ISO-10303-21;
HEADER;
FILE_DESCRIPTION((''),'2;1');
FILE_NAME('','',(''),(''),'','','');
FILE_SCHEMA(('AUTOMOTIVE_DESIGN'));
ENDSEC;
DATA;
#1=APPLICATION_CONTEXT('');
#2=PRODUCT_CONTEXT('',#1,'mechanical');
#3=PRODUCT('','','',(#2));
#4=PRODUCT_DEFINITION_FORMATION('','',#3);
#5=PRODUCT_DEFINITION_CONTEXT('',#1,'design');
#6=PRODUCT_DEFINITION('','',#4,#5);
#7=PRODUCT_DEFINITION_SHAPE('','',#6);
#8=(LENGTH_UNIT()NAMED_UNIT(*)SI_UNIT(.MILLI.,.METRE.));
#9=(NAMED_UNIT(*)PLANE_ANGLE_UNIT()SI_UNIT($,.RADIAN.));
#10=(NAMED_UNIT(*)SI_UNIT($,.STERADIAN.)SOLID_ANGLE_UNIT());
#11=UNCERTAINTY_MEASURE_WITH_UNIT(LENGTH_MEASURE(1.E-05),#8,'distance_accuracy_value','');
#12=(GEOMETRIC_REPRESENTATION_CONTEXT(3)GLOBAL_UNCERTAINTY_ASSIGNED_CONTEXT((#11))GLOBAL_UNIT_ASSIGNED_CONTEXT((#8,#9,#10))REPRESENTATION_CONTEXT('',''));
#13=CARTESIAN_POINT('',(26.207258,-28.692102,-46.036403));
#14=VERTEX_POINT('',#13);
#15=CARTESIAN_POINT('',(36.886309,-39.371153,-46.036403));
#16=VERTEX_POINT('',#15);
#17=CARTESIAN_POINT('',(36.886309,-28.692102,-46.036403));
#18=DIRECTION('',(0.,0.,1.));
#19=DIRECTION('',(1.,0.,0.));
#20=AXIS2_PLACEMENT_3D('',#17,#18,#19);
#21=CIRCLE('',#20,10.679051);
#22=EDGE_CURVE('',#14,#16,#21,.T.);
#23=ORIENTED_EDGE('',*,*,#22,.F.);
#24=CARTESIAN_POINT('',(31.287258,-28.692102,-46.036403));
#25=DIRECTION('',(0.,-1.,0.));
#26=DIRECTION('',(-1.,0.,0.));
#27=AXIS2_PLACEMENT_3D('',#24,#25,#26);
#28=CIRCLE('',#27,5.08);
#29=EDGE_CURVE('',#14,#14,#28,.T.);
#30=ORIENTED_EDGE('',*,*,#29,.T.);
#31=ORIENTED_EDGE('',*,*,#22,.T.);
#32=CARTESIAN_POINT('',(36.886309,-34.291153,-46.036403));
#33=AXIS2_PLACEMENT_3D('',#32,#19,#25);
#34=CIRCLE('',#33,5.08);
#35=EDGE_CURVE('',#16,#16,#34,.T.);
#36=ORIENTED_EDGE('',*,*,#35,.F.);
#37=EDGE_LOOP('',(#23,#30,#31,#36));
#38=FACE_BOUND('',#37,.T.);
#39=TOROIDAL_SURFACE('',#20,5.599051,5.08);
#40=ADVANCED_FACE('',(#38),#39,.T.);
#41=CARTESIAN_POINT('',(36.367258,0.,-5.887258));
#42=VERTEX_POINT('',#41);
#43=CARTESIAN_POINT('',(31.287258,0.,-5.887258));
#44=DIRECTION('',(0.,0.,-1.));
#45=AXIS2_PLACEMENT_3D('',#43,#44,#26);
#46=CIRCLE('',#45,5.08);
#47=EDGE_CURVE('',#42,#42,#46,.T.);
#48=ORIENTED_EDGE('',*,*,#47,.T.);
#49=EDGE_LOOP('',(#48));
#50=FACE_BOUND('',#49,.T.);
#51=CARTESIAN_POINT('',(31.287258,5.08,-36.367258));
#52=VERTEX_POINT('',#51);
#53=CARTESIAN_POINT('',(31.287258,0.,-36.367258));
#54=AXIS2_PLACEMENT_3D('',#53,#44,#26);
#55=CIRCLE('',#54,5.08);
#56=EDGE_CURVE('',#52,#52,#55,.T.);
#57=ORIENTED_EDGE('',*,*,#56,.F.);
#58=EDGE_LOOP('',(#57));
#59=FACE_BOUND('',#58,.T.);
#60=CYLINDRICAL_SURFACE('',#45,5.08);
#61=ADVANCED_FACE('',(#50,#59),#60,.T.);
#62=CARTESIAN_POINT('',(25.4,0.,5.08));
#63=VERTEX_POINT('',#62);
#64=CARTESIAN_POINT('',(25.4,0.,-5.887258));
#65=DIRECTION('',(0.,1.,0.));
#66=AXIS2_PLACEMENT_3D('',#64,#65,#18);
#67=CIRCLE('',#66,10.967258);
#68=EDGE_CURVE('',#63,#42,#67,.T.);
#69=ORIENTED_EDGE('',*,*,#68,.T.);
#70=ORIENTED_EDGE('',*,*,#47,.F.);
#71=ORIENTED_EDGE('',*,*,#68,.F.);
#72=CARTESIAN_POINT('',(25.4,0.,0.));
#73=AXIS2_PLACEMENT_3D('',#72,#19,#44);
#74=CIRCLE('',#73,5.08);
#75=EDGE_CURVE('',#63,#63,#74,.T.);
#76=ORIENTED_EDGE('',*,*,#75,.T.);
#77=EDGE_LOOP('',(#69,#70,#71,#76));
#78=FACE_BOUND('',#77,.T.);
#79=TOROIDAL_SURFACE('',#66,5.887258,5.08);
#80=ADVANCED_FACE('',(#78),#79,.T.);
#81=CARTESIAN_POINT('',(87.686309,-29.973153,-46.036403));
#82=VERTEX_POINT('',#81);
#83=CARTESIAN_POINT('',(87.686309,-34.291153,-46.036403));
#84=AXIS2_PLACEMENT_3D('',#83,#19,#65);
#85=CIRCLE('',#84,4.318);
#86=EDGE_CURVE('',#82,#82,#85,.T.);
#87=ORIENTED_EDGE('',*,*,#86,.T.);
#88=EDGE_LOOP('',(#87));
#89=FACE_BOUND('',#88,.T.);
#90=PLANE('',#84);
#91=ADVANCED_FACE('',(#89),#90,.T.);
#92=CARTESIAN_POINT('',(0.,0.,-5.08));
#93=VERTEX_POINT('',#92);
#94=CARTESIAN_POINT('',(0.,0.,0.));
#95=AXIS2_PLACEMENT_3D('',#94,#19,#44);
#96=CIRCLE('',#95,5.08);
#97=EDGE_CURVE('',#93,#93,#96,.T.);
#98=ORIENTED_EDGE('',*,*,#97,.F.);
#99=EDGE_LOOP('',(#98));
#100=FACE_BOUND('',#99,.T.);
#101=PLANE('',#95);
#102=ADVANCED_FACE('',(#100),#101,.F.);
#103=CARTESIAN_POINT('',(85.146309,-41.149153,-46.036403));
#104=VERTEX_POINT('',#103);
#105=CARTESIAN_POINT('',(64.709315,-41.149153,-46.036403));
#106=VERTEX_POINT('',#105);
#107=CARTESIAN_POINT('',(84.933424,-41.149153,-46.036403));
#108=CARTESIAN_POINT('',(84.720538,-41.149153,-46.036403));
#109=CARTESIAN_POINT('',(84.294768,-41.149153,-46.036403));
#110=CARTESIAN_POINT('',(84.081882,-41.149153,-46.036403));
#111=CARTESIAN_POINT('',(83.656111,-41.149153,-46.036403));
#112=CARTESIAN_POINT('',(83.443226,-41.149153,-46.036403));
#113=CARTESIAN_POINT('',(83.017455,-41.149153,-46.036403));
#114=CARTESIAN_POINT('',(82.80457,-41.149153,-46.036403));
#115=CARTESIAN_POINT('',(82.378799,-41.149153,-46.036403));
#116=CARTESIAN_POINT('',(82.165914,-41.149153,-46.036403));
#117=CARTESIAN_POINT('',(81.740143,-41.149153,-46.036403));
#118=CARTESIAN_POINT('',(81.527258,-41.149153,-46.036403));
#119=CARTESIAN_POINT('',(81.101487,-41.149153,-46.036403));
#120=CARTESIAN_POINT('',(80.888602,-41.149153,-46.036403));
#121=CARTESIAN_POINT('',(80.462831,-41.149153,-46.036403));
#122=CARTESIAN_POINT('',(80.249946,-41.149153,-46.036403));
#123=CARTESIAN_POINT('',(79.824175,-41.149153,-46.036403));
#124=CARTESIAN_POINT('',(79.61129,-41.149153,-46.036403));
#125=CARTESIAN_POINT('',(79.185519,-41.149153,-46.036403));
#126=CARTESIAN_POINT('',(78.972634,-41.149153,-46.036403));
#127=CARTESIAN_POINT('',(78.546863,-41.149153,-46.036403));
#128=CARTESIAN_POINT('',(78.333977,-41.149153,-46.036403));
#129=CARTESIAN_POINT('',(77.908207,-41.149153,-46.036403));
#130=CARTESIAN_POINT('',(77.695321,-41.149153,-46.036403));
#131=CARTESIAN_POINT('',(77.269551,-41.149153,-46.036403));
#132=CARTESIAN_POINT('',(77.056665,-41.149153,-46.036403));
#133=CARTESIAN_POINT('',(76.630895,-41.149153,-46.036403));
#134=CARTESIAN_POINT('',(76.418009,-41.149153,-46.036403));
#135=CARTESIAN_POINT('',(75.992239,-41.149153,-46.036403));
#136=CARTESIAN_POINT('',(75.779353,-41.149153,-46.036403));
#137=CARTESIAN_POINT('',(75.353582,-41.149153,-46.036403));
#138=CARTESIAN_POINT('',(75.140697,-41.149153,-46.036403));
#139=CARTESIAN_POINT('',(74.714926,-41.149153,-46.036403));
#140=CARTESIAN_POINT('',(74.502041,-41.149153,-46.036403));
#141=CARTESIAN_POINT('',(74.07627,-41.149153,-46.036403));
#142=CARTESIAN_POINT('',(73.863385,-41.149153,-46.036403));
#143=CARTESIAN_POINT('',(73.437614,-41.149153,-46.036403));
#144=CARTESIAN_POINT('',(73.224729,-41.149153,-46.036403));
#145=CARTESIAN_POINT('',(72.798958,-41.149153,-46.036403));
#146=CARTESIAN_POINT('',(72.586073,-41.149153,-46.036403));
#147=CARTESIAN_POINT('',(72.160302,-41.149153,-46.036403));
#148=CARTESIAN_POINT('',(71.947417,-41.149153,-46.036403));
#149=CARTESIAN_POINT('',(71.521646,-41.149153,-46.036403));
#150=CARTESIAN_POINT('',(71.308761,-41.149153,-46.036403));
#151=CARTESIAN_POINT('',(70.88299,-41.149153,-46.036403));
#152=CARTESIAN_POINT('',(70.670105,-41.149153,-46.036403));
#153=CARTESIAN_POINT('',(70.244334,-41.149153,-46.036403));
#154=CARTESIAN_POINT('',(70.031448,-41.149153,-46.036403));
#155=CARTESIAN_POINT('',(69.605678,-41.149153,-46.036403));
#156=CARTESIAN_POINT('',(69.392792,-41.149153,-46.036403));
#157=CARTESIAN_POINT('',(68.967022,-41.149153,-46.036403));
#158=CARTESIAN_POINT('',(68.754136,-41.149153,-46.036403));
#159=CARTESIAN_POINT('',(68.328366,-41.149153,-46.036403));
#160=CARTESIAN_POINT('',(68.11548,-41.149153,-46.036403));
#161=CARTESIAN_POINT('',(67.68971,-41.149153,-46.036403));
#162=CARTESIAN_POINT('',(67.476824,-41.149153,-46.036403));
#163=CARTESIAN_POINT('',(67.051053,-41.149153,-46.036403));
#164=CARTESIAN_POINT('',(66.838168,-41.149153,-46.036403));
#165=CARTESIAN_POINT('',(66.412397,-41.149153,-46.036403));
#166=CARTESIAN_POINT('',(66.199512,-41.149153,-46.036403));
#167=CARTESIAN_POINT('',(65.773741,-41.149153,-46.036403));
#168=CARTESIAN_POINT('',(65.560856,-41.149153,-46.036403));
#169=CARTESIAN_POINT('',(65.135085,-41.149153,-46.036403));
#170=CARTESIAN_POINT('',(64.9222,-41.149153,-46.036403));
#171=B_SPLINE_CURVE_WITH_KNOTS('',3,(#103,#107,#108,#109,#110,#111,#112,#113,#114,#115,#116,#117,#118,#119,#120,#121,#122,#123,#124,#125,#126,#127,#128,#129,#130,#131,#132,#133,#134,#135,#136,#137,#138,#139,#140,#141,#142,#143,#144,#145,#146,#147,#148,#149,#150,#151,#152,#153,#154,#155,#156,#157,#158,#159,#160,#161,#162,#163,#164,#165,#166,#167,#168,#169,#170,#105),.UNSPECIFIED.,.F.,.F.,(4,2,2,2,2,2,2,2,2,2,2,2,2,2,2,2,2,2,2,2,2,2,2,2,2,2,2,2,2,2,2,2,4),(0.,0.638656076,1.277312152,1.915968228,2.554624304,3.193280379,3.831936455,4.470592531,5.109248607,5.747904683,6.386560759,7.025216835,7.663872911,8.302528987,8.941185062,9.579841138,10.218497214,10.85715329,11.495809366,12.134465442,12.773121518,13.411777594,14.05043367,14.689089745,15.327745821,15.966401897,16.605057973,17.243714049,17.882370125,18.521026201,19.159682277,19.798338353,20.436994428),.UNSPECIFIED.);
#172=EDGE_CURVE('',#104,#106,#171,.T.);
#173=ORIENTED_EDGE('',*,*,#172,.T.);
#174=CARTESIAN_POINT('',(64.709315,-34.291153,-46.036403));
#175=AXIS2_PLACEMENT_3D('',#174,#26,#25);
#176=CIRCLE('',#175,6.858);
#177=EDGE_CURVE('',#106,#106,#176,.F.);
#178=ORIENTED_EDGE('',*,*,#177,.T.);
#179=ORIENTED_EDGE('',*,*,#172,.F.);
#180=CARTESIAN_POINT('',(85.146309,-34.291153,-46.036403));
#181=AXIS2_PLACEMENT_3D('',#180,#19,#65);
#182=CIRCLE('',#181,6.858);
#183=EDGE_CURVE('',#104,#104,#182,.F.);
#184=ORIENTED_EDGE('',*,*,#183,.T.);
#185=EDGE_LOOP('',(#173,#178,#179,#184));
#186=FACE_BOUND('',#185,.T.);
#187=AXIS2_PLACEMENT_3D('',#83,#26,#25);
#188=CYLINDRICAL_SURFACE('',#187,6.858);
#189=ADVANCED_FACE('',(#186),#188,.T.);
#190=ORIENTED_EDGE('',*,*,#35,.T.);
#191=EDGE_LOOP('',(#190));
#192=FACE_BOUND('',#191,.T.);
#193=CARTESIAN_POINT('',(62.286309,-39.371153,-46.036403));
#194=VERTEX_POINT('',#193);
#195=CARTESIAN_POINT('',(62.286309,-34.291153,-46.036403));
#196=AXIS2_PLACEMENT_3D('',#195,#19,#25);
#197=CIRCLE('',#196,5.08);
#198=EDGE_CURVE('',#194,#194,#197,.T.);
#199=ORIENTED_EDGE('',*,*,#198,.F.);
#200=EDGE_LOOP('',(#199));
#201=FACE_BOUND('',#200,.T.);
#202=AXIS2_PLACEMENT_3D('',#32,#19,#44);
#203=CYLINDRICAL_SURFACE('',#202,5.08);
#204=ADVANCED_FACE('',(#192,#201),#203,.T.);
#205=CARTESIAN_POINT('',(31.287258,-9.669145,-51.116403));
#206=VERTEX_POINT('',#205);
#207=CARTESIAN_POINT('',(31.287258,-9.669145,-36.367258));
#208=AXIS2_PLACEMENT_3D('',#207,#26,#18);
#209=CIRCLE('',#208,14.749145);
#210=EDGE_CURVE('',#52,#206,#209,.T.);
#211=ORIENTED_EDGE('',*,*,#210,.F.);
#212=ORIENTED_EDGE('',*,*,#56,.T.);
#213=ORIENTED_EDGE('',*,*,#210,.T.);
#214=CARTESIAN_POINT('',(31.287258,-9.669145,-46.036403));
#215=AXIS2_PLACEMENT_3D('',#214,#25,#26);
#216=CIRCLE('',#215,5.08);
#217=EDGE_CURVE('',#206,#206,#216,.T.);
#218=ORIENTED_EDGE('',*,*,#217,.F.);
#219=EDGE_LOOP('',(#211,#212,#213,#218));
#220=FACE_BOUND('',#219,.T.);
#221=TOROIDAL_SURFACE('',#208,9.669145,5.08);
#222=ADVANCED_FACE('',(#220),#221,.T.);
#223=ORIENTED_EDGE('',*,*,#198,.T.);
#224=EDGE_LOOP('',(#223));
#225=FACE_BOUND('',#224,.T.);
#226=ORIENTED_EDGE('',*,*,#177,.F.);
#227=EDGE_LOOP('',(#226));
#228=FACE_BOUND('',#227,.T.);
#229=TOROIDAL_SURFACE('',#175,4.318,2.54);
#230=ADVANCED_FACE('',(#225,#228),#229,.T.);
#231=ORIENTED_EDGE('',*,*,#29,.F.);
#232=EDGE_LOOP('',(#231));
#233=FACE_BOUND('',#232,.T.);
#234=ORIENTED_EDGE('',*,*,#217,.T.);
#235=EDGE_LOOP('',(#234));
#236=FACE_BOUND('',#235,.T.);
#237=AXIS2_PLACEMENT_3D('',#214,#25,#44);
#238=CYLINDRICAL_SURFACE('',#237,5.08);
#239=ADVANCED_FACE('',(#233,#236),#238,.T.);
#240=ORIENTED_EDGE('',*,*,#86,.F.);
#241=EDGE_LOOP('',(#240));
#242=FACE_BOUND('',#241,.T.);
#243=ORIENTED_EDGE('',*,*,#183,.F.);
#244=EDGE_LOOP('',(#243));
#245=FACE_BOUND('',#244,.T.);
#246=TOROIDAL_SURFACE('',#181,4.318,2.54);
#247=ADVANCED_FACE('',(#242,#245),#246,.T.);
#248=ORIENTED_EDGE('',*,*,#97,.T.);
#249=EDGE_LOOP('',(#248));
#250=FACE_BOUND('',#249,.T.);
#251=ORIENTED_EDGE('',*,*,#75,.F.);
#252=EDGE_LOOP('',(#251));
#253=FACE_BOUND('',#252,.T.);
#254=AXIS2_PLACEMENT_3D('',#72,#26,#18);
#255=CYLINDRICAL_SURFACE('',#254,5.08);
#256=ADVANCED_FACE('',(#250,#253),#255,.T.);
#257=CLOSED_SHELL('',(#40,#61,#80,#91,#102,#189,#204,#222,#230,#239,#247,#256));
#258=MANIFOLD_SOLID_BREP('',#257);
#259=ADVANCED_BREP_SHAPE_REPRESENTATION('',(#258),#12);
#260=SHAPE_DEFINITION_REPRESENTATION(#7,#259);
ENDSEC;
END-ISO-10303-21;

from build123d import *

# Parameters (mm, degrees)
SKETCH6_R           = 5.08
SKETCH7_R           = 6.858
BOSS_EXTRUDE1_DEPTH = 25.4
FILLET1_R           = 2.54


with BuildPart() as part:
    # Sweep1: sweep along a curve in space
    with BuildLine() as sweep1_path:
        Line((0, 0, 0), (25.4, 0, 0))
        ThreePointArc((25.4, 0, 0), (29.562920183, 0, -1.724337999), (31.287258182, 0, -5.887258182))
        Line((31.287258182, 0, -5.887258182), (31.287258182, 0, -36.367258182))
        ThreePointArc((31.287258182, 0, -36.367258182), (31.287258182, -2.832027095, -43.204376403), (31.287258182, -9.669145315, -46.036403497))
        Line((31.287258182, -9.669145315, -46.036403497), (31.287258182, -28.692102311, -46.036403497))
        ThreePointArc((31.287258182, -28.692102311, -46.036403497), (32.927182179, -32.651229067, -46.036403497), (36.886308936, -34.291153065, -46.036403497))
        Line((36.886308936, -34.291153065, -46.036403497), (62.286308936, -34.291153065, -46.036403497))
    # Sketch6 → Sweep1 (sweep)
    with BuildSketch(Plane(origin=(0, 0, 0), x_dir=(0, 0, -1), z_dir=(1, 0, 0))):
        Circle(SKETCH6_R)
    sweep(path=sweep1_path.line)

    # Sketch7 → Boss-Extrude1 (add)
    with BuildSketch(Plane(origin=(62.286308936, 0, 0), x_dir=(0, 0, -1), z_dir=(1, 0, 0))):
        with Locations(Location((46.036403497, -34.291153065, 0), (0, 0, 270))):
            Circle(SKETCH7_R)
    extrude(amount=BOSS_EXTRUDE1_DEPTH)

    # Fillet1
    # the kernel refuses this fillet: 2.54 mm, written as the material it takes off along each edge
    with BuildSketch(Plane(origin=(62.286308936, -34.291153065, -46.036403497), x_dir=(0, -1, 0), z_dir=(0, 0, 1))) as fillet1_piece_1:
        with BuildLine():
            CenterArc((4.318, 2.423005572), FILLET1_R, 287.457603124, 72.542396876)
            Line((5.08, 0), (5.09524, -0.048460111))
            ThreePointArc((5.09524, -0.048460111), (5.969, -0.0508), (6.858, -0.0508))
            Line((6.858, -0.0508), (6.9088, 0))
            Line((6.9088, 0), (6.9088, 2.423005572))
            Line((6.9088, 2.423005572), (6.858, 2.423005572))
        make_face()
    revolve(axis=Axis((62.286308936, -34.291153065, -46.036403497), (1, 0, 0)), mode=Mode.SUBTRACT)
    with BuildSketch(Plane(origin=(87.686308936, -34.291153065, -46.036403497), x_dir=(0, -1, 0), z_dir=(0, 0, 1))) as fillet1_piece_2:
        with BuildLine():
            CenterArc((6.858 - FILLET1_R, -FILLET1_R), FILLET1_R, 0, 90)
            Line((6.858 - FILLET1_R, 0), (6.858 - FILLET1_R, FILLET1_R * 0.02))
            Line((6.858 - FILLET1_R, FILLET1_R * 0.02), (6.858 + FILLET1_R * 0.02, FILLET1_R * 0.02))
            Line((6.858 + FILLET1_R * 0.02, FILLET1_R * 0.02), (6.858 + FILLET1_R * 0.02, -FILLET1_R))
            Line((6.858 + FILLET1_R * 0.02, -FILLET1_R), (6.858, -FILLET1_R))
        make_face()
    revolve(axis=Axis((87.686308936, -34.291153065, -46.036403497), (1, 0, 0)), mode=Mode.SUBTRACT)


solid = part.part
